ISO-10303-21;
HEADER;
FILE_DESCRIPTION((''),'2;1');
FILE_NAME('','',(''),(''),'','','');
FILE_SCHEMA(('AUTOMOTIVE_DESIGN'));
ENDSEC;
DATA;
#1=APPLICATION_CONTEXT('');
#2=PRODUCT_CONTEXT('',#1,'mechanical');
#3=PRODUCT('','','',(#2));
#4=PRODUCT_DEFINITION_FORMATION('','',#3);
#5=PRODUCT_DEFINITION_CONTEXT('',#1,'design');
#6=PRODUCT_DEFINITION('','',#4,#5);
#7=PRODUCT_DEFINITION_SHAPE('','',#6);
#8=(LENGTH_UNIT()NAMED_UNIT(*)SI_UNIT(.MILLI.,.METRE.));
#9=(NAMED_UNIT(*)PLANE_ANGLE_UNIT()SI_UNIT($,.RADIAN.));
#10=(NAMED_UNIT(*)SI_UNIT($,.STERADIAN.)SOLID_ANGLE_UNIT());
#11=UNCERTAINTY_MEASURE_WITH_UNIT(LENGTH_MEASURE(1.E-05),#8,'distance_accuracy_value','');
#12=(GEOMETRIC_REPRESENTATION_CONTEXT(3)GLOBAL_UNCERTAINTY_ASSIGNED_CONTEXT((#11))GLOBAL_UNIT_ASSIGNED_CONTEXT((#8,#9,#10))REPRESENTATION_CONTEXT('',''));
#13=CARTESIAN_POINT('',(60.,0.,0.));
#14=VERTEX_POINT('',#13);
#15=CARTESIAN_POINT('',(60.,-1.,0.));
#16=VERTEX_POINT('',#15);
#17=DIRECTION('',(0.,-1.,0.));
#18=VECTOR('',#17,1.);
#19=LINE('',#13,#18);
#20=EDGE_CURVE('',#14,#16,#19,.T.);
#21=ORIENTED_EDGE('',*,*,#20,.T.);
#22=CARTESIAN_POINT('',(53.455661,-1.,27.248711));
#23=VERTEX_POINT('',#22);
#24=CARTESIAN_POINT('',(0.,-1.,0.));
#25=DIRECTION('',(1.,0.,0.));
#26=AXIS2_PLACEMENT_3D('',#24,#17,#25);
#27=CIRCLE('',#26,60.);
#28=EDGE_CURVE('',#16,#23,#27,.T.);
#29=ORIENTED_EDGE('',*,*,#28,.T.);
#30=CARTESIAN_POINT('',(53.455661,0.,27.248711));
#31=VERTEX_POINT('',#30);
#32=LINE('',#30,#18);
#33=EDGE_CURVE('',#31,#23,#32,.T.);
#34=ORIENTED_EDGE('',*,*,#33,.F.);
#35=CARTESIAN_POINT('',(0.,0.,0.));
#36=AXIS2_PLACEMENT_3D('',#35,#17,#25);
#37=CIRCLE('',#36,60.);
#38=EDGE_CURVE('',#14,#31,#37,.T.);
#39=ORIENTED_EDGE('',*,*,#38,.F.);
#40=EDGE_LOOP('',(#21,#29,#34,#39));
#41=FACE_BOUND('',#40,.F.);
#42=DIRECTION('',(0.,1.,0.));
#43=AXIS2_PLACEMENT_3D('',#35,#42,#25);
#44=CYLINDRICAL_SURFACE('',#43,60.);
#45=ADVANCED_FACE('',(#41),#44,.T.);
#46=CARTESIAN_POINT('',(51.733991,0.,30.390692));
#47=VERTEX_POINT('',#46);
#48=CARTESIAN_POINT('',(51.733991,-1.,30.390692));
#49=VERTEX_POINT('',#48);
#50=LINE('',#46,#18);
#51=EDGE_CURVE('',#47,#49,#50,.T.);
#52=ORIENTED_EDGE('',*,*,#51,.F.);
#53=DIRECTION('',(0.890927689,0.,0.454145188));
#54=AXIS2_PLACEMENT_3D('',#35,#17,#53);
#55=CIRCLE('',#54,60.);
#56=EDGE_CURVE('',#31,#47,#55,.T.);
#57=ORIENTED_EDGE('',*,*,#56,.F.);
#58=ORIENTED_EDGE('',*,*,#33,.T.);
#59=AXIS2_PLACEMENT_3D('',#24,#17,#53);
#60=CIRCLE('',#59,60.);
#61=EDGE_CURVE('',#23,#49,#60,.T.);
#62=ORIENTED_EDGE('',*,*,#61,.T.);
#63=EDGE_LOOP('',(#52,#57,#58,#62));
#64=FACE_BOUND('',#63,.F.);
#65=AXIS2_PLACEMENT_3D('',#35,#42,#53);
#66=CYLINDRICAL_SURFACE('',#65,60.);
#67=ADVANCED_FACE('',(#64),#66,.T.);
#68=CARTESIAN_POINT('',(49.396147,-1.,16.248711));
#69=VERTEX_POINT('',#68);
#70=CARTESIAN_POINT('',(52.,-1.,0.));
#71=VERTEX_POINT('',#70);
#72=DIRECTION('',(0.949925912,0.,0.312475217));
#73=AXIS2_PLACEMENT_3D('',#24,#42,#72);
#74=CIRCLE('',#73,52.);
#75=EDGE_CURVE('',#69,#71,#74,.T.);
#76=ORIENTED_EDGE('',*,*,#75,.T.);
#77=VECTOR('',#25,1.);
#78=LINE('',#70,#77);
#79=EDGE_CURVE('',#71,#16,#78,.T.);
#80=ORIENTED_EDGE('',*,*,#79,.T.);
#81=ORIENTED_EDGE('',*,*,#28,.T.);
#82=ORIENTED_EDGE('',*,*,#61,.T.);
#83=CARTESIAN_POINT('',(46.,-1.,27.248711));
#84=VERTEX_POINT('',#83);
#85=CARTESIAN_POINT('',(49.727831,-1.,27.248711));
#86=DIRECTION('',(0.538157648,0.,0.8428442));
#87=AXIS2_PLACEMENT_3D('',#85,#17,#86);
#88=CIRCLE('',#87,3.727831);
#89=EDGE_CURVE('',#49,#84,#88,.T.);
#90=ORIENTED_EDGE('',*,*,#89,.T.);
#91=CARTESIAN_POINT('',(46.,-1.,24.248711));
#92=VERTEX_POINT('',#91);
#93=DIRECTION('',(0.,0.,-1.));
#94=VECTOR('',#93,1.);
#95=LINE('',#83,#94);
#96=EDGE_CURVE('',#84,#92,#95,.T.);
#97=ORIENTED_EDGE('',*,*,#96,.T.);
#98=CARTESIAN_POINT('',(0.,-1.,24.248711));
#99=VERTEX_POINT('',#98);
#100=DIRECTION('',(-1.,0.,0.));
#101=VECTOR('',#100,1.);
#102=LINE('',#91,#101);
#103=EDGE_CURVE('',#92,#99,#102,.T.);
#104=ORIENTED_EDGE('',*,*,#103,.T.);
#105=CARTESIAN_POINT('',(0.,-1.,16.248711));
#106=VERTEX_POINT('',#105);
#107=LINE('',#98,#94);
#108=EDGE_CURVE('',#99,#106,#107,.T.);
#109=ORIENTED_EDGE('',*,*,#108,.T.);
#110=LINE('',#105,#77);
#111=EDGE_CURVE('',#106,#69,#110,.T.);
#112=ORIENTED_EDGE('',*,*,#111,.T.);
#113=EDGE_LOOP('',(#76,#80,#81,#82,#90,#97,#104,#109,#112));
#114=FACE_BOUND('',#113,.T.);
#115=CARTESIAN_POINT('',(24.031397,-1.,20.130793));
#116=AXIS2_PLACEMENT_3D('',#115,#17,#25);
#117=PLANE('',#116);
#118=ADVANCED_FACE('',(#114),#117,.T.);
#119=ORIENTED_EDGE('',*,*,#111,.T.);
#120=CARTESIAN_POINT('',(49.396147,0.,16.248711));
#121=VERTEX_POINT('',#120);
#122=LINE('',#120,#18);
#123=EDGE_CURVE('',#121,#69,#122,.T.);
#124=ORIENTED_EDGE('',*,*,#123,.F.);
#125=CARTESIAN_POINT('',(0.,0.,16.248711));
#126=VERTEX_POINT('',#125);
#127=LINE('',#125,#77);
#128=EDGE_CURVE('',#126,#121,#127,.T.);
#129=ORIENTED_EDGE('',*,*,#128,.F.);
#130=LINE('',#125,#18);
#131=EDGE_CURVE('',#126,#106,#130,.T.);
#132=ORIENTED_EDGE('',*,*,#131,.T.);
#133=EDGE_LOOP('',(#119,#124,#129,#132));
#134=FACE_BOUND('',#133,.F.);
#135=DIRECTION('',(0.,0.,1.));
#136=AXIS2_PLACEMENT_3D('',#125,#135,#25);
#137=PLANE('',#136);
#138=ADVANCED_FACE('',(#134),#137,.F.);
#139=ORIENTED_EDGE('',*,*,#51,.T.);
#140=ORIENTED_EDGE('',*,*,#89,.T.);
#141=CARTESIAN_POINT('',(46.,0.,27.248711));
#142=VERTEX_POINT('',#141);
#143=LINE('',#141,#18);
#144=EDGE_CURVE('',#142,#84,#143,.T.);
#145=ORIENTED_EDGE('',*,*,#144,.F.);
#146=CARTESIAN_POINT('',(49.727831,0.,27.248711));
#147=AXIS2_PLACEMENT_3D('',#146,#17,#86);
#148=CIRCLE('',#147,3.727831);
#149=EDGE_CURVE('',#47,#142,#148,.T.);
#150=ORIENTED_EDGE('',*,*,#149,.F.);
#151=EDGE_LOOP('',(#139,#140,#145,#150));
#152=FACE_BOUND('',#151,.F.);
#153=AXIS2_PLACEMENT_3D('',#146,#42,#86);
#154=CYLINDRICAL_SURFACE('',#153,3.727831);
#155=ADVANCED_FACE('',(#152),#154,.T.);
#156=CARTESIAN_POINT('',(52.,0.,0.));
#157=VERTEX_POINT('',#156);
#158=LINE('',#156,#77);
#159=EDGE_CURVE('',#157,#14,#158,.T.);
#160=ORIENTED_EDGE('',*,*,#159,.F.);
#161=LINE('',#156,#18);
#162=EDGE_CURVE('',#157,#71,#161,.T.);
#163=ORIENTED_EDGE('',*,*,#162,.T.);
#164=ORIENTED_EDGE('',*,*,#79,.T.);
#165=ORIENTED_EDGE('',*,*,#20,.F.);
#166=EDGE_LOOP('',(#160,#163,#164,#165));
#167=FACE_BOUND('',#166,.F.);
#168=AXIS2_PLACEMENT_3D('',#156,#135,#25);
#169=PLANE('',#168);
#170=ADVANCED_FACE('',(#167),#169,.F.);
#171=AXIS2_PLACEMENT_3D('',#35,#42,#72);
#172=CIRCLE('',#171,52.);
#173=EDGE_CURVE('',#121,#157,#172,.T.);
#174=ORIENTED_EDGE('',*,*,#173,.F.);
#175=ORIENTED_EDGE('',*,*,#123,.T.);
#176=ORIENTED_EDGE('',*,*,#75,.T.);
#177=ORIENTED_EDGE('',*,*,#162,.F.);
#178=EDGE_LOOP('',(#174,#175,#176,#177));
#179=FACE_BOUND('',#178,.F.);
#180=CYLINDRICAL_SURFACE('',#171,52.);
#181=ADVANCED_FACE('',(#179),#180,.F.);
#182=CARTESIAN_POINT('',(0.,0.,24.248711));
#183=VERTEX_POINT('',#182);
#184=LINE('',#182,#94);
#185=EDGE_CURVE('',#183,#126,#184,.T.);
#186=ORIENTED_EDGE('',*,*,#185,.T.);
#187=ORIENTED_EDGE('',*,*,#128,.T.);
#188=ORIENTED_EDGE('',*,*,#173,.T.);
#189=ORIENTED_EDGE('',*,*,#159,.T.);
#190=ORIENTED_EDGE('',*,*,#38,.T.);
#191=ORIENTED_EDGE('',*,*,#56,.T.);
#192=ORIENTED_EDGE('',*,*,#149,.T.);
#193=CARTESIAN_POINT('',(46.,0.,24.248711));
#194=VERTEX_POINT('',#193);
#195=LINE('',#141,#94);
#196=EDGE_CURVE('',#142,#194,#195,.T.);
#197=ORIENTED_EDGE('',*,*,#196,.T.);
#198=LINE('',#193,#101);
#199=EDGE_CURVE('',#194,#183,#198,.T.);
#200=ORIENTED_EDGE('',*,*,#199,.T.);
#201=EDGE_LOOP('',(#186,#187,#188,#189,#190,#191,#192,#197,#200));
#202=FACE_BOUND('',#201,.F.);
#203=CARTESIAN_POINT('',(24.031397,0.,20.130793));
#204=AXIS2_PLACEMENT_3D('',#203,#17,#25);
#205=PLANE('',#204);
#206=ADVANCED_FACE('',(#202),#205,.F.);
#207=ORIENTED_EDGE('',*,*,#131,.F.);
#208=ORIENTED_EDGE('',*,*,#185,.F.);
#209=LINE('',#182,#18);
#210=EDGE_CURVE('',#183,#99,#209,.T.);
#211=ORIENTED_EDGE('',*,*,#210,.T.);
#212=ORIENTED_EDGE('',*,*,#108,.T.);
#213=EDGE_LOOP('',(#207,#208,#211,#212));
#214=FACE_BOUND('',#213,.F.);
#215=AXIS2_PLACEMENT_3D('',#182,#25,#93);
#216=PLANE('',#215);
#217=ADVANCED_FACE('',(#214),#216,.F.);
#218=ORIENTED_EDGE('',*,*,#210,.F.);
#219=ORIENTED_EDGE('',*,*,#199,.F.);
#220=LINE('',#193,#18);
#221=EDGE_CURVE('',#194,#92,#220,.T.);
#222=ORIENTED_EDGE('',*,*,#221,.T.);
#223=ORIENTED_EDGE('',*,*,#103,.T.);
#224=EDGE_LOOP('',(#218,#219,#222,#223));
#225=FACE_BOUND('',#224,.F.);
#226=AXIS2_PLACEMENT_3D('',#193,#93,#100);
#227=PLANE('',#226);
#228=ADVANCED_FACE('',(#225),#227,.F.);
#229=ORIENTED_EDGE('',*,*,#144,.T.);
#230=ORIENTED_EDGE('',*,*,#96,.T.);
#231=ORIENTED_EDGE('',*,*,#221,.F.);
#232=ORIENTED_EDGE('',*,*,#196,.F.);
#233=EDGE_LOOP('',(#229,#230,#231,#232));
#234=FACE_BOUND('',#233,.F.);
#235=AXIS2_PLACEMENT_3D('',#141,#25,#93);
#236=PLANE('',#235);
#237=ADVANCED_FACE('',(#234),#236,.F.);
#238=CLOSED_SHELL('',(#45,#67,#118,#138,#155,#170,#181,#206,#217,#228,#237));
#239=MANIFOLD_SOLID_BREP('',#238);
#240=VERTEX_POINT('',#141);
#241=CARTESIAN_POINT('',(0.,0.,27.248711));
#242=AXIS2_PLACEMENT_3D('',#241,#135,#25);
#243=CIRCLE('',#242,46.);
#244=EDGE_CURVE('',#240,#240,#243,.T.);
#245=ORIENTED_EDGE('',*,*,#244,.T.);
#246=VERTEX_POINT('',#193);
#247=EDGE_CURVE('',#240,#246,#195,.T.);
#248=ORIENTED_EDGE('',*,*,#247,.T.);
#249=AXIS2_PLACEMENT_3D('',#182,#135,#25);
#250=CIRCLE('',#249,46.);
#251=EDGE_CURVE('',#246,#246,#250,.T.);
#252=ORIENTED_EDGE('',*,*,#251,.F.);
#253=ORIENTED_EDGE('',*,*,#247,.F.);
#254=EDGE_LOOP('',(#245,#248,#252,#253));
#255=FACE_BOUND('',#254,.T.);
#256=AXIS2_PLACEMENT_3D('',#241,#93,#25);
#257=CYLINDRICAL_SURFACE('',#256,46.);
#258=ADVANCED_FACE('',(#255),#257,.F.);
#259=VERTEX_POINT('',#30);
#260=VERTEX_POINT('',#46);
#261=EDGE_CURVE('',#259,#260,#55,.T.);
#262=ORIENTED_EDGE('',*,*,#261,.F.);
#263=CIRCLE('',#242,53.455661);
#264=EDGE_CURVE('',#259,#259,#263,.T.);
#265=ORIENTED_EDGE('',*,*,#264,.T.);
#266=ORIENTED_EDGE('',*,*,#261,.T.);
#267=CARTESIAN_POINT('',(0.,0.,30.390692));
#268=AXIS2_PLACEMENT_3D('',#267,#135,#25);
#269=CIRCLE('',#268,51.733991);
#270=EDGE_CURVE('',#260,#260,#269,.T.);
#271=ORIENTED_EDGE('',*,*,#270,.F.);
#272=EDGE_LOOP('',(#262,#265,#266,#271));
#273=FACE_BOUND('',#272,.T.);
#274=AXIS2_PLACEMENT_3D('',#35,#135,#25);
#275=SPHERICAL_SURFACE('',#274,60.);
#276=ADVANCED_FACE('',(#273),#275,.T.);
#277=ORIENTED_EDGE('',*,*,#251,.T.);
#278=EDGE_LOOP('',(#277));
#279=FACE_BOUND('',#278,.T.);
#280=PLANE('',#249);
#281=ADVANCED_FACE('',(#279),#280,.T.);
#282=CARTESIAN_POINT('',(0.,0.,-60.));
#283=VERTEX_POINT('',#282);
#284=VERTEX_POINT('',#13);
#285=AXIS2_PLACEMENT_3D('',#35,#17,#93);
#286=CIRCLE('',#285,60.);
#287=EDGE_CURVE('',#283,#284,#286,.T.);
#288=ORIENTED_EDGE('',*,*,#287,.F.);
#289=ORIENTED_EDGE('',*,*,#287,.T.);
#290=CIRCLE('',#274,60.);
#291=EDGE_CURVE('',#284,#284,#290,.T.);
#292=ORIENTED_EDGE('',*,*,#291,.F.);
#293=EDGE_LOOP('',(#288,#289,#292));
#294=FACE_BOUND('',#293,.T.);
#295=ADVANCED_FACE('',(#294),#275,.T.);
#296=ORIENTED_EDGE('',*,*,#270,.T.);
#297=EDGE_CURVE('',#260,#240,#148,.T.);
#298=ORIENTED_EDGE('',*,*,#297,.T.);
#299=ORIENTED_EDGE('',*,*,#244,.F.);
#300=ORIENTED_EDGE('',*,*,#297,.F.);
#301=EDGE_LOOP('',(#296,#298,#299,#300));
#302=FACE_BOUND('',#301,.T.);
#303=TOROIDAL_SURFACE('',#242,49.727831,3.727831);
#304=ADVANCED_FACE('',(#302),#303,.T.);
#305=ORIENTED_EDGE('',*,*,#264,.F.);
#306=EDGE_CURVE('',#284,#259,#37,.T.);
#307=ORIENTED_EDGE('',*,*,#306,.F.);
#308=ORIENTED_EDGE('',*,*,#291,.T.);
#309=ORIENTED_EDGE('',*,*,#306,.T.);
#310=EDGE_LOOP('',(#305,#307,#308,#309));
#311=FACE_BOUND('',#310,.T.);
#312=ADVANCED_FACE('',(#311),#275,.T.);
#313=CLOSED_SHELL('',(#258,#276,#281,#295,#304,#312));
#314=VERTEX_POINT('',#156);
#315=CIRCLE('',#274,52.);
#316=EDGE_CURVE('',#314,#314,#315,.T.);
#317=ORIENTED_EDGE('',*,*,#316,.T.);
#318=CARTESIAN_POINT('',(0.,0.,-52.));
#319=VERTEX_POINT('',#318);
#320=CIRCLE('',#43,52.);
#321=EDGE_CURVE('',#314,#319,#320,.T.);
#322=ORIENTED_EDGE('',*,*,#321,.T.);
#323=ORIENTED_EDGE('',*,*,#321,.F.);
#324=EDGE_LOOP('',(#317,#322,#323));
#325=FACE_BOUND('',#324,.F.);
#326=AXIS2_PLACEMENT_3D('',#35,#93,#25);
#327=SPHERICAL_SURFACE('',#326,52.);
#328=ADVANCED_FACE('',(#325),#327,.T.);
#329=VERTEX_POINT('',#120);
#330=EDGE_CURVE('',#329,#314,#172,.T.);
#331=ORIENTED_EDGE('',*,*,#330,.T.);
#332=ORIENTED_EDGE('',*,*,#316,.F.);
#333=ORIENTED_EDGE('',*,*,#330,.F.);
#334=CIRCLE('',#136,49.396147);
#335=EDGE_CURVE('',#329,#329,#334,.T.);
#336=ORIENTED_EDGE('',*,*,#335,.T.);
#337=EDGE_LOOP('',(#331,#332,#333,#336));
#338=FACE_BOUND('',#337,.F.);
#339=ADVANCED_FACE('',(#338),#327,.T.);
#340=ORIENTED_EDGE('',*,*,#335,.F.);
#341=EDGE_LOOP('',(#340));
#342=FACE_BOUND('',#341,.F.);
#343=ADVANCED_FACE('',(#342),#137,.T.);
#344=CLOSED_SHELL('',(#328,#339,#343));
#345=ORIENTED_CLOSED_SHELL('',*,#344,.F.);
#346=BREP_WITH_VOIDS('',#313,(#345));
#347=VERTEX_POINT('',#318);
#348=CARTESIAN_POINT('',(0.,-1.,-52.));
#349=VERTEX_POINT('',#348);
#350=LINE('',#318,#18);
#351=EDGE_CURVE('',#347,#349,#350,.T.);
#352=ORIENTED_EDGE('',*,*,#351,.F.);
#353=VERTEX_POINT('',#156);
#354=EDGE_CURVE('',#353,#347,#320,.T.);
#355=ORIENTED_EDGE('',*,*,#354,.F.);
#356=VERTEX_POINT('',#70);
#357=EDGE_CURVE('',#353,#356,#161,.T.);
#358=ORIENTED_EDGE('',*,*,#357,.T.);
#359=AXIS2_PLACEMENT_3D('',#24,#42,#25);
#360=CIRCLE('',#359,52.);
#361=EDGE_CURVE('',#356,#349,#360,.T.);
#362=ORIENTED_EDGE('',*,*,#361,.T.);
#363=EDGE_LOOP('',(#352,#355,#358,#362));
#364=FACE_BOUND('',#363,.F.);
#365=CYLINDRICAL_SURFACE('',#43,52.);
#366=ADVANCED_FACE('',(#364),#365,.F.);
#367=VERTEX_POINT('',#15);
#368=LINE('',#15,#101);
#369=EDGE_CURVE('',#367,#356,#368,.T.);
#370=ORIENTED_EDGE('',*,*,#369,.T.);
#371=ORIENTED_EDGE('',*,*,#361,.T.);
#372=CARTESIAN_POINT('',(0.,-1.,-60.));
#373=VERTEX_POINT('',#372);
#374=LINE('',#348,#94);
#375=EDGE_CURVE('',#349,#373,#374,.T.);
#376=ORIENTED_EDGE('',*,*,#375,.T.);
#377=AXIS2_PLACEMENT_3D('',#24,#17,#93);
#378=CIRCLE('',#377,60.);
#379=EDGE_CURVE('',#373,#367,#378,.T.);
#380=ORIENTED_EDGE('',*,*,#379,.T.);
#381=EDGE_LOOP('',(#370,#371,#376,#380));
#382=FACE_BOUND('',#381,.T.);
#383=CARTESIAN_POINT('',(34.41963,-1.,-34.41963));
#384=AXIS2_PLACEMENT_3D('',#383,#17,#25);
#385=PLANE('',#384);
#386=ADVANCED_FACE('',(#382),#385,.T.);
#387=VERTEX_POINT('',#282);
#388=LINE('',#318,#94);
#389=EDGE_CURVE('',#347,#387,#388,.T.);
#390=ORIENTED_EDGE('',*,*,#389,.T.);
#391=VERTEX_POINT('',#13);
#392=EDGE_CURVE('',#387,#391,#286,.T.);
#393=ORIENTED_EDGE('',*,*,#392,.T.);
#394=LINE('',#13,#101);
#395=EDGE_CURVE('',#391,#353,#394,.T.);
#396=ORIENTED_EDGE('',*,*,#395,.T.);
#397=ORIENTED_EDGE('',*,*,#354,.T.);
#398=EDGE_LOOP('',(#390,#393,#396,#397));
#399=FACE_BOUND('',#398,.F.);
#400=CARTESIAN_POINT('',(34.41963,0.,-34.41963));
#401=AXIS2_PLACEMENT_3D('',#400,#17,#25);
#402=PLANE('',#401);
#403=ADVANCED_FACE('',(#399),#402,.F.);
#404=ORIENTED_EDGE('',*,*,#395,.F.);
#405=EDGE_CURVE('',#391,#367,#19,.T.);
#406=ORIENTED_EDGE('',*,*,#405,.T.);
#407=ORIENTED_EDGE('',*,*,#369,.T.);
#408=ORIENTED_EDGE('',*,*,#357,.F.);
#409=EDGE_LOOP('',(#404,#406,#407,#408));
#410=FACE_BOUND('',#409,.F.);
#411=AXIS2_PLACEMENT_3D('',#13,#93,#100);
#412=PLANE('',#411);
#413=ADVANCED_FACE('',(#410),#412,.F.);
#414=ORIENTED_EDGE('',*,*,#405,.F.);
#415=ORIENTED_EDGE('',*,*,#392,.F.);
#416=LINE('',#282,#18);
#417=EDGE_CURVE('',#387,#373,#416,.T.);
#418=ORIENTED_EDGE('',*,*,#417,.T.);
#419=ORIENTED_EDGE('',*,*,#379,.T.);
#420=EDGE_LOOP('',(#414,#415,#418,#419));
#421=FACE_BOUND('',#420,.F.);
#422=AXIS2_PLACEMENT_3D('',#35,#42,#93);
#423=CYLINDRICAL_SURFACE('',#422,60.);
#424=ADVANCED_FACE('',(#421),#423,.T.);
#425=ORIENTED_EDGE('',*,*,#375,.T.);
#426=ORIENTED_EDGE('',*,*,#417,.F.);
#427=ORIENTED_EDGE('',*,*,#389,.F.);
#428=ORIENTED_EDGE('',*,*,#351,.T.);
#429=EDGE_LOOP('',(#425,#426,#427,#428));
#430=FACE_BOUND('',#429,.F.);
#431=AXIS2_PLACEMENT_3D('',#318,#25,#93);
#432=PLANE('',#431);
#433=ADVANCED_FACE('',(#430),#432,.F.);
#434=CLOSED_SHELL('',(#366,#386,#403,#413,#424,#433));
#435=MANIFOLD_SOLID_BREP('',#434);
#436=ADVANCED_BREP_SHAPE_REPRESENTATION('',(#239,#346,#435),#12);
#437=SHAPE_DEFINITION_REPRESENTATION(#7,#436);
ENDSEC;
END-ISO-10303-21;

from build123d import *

# Parameters (mm, degrees)
F3_DEPTH = 1
F4_DEPTH = 1


# Not quite as in the source:
# - a feature names something its author has since deleted; it is built from what else it names


with BuildPart() as f2:
    # F0 (on Front) → F2 (revolve)
    with BuildSketch(Plane.XZ):
        with BuildLine():
            Line((0, 16.248711306), (49.3961474297, 16.248711306))
            ThreePointArc((49.3961474297, 16.248711306), (47.8655015236, 20.3197874963), (46, 24.248711306))
            Line((46, 24.248711306), (0, 24.248711306))
            Line((0, 24.248711306), (0, 16.248711306))
        make_face()
        with BuildLine():
            ThreePointArc((0, -60), (42.4264068712, -42.4264068712), (60, 0))
            Line((60, 0), (52, 0))
            ThreePointArc((52, 0), (36.7695526217, -36.7695526217), (0, -52))
            Line((0, -52), (0, -60))
        make_face()
        with BuildLine():
            Line((52, 0), (60, 0))
            ThreePointArc((60, 0), (58.3409790885, 14.0117864313), (53.4556613668, 27.248711306))
            Line((53.4556613668, 27.248711306), (46, 27.248711306))
            Line((46, 27.248711306), (46, 24.248711306))
            ThreePointArc((46, 24.248711306), (47.8655015236, 20.3197874963), (49.3961474297, 16.248711306))
            ThreePointArc((49.3961474297, 16.248711306), (51.3449104895, 8.2280111101), (52, 0))
        make_face()
        with BuildLine():
            Line((46, 27.248711306), (53.4556613668, 27.248711306))
            ThreePointArc((53.4556613668, 27.248711306), (52.6182835721, 28.8325551058), (51.7339912755, 30.3906917774))
            ThreePointArc((51.7339912755, 30.3906917774), (47.93644929, 30.5179121728), (46, 27.248711306))
        make_face()
    revolve(axis=Axis((0, 0, 0), (0, 0, 1)))


with BuildPart() as f3:
    # F0 (on Front) → F3 (new body)
    with BuildSketch(Plane.XZ):
        with BuildLine():
            Line((0, 16.248711306), (49.3961474297, 16.248711306))
            ThreePointArc((49.3961474297, 16.248711306), (47.8655015236, 20.3197874963), (46, 24.248711306))
            Line((46, 24.248711306), (0, 24.248711306))
            Line((0, 24.248711306), (0, 16.248711306))
        make_face()
        with BuildLine():
            Line((46, 27.248711306), (53.4556613668, 27.248711306))
            ThreePointArc((53.4556613668, 27.248711306), (52.6182835721, 28.8325551058), (51.7339912755, 30.3906917774))
            ThreePointArc((51.7339912755, 30.3906917774), (47.93644929, 30.5179121728), (46, 27.248711306))
        make_face()
        with BuildLine():
            Line((52, 0), (60, 0))
            ThreePointArc((60, 0), (58.3409790885, 14.0117864313), (53.4556613668, 27.248711306))
            Line((53.4556613668, 27.248711306), (46, 27.248711306))
            Line((46, 27.248711306), (46, 24.248711306))
            ThreePointArc((46, 24.248711306), (47.8655015236, 20.3197874963), (49.3961474297, 16.248711306))
            ThreePointArc((49.3961474297, 16.248711306), (51.3449104895, 8.2280111101), (52, 0))
        make_face()
    extrude(amount=F3_DEPTH)


with BuildPart() as f4:
    # F0 (on Front) → F4 (new body)
    with BuildSketch(Plane.XZ):
        with BuildLine():
            ThreePointArc((0, -60), (42.4264068712, -42.4264068712), (60, 0))
            Line((60, 0), (52, 0))
            ThreePointArc((52, 0), (36.7695526217, -36.7695526217), (0, -52))
            Line((0, -52), (0, -60))
        make_face()
    extrude(amount=F4_DEPTH)


solid = Compound([f2.part, f3.part, f4.part])
